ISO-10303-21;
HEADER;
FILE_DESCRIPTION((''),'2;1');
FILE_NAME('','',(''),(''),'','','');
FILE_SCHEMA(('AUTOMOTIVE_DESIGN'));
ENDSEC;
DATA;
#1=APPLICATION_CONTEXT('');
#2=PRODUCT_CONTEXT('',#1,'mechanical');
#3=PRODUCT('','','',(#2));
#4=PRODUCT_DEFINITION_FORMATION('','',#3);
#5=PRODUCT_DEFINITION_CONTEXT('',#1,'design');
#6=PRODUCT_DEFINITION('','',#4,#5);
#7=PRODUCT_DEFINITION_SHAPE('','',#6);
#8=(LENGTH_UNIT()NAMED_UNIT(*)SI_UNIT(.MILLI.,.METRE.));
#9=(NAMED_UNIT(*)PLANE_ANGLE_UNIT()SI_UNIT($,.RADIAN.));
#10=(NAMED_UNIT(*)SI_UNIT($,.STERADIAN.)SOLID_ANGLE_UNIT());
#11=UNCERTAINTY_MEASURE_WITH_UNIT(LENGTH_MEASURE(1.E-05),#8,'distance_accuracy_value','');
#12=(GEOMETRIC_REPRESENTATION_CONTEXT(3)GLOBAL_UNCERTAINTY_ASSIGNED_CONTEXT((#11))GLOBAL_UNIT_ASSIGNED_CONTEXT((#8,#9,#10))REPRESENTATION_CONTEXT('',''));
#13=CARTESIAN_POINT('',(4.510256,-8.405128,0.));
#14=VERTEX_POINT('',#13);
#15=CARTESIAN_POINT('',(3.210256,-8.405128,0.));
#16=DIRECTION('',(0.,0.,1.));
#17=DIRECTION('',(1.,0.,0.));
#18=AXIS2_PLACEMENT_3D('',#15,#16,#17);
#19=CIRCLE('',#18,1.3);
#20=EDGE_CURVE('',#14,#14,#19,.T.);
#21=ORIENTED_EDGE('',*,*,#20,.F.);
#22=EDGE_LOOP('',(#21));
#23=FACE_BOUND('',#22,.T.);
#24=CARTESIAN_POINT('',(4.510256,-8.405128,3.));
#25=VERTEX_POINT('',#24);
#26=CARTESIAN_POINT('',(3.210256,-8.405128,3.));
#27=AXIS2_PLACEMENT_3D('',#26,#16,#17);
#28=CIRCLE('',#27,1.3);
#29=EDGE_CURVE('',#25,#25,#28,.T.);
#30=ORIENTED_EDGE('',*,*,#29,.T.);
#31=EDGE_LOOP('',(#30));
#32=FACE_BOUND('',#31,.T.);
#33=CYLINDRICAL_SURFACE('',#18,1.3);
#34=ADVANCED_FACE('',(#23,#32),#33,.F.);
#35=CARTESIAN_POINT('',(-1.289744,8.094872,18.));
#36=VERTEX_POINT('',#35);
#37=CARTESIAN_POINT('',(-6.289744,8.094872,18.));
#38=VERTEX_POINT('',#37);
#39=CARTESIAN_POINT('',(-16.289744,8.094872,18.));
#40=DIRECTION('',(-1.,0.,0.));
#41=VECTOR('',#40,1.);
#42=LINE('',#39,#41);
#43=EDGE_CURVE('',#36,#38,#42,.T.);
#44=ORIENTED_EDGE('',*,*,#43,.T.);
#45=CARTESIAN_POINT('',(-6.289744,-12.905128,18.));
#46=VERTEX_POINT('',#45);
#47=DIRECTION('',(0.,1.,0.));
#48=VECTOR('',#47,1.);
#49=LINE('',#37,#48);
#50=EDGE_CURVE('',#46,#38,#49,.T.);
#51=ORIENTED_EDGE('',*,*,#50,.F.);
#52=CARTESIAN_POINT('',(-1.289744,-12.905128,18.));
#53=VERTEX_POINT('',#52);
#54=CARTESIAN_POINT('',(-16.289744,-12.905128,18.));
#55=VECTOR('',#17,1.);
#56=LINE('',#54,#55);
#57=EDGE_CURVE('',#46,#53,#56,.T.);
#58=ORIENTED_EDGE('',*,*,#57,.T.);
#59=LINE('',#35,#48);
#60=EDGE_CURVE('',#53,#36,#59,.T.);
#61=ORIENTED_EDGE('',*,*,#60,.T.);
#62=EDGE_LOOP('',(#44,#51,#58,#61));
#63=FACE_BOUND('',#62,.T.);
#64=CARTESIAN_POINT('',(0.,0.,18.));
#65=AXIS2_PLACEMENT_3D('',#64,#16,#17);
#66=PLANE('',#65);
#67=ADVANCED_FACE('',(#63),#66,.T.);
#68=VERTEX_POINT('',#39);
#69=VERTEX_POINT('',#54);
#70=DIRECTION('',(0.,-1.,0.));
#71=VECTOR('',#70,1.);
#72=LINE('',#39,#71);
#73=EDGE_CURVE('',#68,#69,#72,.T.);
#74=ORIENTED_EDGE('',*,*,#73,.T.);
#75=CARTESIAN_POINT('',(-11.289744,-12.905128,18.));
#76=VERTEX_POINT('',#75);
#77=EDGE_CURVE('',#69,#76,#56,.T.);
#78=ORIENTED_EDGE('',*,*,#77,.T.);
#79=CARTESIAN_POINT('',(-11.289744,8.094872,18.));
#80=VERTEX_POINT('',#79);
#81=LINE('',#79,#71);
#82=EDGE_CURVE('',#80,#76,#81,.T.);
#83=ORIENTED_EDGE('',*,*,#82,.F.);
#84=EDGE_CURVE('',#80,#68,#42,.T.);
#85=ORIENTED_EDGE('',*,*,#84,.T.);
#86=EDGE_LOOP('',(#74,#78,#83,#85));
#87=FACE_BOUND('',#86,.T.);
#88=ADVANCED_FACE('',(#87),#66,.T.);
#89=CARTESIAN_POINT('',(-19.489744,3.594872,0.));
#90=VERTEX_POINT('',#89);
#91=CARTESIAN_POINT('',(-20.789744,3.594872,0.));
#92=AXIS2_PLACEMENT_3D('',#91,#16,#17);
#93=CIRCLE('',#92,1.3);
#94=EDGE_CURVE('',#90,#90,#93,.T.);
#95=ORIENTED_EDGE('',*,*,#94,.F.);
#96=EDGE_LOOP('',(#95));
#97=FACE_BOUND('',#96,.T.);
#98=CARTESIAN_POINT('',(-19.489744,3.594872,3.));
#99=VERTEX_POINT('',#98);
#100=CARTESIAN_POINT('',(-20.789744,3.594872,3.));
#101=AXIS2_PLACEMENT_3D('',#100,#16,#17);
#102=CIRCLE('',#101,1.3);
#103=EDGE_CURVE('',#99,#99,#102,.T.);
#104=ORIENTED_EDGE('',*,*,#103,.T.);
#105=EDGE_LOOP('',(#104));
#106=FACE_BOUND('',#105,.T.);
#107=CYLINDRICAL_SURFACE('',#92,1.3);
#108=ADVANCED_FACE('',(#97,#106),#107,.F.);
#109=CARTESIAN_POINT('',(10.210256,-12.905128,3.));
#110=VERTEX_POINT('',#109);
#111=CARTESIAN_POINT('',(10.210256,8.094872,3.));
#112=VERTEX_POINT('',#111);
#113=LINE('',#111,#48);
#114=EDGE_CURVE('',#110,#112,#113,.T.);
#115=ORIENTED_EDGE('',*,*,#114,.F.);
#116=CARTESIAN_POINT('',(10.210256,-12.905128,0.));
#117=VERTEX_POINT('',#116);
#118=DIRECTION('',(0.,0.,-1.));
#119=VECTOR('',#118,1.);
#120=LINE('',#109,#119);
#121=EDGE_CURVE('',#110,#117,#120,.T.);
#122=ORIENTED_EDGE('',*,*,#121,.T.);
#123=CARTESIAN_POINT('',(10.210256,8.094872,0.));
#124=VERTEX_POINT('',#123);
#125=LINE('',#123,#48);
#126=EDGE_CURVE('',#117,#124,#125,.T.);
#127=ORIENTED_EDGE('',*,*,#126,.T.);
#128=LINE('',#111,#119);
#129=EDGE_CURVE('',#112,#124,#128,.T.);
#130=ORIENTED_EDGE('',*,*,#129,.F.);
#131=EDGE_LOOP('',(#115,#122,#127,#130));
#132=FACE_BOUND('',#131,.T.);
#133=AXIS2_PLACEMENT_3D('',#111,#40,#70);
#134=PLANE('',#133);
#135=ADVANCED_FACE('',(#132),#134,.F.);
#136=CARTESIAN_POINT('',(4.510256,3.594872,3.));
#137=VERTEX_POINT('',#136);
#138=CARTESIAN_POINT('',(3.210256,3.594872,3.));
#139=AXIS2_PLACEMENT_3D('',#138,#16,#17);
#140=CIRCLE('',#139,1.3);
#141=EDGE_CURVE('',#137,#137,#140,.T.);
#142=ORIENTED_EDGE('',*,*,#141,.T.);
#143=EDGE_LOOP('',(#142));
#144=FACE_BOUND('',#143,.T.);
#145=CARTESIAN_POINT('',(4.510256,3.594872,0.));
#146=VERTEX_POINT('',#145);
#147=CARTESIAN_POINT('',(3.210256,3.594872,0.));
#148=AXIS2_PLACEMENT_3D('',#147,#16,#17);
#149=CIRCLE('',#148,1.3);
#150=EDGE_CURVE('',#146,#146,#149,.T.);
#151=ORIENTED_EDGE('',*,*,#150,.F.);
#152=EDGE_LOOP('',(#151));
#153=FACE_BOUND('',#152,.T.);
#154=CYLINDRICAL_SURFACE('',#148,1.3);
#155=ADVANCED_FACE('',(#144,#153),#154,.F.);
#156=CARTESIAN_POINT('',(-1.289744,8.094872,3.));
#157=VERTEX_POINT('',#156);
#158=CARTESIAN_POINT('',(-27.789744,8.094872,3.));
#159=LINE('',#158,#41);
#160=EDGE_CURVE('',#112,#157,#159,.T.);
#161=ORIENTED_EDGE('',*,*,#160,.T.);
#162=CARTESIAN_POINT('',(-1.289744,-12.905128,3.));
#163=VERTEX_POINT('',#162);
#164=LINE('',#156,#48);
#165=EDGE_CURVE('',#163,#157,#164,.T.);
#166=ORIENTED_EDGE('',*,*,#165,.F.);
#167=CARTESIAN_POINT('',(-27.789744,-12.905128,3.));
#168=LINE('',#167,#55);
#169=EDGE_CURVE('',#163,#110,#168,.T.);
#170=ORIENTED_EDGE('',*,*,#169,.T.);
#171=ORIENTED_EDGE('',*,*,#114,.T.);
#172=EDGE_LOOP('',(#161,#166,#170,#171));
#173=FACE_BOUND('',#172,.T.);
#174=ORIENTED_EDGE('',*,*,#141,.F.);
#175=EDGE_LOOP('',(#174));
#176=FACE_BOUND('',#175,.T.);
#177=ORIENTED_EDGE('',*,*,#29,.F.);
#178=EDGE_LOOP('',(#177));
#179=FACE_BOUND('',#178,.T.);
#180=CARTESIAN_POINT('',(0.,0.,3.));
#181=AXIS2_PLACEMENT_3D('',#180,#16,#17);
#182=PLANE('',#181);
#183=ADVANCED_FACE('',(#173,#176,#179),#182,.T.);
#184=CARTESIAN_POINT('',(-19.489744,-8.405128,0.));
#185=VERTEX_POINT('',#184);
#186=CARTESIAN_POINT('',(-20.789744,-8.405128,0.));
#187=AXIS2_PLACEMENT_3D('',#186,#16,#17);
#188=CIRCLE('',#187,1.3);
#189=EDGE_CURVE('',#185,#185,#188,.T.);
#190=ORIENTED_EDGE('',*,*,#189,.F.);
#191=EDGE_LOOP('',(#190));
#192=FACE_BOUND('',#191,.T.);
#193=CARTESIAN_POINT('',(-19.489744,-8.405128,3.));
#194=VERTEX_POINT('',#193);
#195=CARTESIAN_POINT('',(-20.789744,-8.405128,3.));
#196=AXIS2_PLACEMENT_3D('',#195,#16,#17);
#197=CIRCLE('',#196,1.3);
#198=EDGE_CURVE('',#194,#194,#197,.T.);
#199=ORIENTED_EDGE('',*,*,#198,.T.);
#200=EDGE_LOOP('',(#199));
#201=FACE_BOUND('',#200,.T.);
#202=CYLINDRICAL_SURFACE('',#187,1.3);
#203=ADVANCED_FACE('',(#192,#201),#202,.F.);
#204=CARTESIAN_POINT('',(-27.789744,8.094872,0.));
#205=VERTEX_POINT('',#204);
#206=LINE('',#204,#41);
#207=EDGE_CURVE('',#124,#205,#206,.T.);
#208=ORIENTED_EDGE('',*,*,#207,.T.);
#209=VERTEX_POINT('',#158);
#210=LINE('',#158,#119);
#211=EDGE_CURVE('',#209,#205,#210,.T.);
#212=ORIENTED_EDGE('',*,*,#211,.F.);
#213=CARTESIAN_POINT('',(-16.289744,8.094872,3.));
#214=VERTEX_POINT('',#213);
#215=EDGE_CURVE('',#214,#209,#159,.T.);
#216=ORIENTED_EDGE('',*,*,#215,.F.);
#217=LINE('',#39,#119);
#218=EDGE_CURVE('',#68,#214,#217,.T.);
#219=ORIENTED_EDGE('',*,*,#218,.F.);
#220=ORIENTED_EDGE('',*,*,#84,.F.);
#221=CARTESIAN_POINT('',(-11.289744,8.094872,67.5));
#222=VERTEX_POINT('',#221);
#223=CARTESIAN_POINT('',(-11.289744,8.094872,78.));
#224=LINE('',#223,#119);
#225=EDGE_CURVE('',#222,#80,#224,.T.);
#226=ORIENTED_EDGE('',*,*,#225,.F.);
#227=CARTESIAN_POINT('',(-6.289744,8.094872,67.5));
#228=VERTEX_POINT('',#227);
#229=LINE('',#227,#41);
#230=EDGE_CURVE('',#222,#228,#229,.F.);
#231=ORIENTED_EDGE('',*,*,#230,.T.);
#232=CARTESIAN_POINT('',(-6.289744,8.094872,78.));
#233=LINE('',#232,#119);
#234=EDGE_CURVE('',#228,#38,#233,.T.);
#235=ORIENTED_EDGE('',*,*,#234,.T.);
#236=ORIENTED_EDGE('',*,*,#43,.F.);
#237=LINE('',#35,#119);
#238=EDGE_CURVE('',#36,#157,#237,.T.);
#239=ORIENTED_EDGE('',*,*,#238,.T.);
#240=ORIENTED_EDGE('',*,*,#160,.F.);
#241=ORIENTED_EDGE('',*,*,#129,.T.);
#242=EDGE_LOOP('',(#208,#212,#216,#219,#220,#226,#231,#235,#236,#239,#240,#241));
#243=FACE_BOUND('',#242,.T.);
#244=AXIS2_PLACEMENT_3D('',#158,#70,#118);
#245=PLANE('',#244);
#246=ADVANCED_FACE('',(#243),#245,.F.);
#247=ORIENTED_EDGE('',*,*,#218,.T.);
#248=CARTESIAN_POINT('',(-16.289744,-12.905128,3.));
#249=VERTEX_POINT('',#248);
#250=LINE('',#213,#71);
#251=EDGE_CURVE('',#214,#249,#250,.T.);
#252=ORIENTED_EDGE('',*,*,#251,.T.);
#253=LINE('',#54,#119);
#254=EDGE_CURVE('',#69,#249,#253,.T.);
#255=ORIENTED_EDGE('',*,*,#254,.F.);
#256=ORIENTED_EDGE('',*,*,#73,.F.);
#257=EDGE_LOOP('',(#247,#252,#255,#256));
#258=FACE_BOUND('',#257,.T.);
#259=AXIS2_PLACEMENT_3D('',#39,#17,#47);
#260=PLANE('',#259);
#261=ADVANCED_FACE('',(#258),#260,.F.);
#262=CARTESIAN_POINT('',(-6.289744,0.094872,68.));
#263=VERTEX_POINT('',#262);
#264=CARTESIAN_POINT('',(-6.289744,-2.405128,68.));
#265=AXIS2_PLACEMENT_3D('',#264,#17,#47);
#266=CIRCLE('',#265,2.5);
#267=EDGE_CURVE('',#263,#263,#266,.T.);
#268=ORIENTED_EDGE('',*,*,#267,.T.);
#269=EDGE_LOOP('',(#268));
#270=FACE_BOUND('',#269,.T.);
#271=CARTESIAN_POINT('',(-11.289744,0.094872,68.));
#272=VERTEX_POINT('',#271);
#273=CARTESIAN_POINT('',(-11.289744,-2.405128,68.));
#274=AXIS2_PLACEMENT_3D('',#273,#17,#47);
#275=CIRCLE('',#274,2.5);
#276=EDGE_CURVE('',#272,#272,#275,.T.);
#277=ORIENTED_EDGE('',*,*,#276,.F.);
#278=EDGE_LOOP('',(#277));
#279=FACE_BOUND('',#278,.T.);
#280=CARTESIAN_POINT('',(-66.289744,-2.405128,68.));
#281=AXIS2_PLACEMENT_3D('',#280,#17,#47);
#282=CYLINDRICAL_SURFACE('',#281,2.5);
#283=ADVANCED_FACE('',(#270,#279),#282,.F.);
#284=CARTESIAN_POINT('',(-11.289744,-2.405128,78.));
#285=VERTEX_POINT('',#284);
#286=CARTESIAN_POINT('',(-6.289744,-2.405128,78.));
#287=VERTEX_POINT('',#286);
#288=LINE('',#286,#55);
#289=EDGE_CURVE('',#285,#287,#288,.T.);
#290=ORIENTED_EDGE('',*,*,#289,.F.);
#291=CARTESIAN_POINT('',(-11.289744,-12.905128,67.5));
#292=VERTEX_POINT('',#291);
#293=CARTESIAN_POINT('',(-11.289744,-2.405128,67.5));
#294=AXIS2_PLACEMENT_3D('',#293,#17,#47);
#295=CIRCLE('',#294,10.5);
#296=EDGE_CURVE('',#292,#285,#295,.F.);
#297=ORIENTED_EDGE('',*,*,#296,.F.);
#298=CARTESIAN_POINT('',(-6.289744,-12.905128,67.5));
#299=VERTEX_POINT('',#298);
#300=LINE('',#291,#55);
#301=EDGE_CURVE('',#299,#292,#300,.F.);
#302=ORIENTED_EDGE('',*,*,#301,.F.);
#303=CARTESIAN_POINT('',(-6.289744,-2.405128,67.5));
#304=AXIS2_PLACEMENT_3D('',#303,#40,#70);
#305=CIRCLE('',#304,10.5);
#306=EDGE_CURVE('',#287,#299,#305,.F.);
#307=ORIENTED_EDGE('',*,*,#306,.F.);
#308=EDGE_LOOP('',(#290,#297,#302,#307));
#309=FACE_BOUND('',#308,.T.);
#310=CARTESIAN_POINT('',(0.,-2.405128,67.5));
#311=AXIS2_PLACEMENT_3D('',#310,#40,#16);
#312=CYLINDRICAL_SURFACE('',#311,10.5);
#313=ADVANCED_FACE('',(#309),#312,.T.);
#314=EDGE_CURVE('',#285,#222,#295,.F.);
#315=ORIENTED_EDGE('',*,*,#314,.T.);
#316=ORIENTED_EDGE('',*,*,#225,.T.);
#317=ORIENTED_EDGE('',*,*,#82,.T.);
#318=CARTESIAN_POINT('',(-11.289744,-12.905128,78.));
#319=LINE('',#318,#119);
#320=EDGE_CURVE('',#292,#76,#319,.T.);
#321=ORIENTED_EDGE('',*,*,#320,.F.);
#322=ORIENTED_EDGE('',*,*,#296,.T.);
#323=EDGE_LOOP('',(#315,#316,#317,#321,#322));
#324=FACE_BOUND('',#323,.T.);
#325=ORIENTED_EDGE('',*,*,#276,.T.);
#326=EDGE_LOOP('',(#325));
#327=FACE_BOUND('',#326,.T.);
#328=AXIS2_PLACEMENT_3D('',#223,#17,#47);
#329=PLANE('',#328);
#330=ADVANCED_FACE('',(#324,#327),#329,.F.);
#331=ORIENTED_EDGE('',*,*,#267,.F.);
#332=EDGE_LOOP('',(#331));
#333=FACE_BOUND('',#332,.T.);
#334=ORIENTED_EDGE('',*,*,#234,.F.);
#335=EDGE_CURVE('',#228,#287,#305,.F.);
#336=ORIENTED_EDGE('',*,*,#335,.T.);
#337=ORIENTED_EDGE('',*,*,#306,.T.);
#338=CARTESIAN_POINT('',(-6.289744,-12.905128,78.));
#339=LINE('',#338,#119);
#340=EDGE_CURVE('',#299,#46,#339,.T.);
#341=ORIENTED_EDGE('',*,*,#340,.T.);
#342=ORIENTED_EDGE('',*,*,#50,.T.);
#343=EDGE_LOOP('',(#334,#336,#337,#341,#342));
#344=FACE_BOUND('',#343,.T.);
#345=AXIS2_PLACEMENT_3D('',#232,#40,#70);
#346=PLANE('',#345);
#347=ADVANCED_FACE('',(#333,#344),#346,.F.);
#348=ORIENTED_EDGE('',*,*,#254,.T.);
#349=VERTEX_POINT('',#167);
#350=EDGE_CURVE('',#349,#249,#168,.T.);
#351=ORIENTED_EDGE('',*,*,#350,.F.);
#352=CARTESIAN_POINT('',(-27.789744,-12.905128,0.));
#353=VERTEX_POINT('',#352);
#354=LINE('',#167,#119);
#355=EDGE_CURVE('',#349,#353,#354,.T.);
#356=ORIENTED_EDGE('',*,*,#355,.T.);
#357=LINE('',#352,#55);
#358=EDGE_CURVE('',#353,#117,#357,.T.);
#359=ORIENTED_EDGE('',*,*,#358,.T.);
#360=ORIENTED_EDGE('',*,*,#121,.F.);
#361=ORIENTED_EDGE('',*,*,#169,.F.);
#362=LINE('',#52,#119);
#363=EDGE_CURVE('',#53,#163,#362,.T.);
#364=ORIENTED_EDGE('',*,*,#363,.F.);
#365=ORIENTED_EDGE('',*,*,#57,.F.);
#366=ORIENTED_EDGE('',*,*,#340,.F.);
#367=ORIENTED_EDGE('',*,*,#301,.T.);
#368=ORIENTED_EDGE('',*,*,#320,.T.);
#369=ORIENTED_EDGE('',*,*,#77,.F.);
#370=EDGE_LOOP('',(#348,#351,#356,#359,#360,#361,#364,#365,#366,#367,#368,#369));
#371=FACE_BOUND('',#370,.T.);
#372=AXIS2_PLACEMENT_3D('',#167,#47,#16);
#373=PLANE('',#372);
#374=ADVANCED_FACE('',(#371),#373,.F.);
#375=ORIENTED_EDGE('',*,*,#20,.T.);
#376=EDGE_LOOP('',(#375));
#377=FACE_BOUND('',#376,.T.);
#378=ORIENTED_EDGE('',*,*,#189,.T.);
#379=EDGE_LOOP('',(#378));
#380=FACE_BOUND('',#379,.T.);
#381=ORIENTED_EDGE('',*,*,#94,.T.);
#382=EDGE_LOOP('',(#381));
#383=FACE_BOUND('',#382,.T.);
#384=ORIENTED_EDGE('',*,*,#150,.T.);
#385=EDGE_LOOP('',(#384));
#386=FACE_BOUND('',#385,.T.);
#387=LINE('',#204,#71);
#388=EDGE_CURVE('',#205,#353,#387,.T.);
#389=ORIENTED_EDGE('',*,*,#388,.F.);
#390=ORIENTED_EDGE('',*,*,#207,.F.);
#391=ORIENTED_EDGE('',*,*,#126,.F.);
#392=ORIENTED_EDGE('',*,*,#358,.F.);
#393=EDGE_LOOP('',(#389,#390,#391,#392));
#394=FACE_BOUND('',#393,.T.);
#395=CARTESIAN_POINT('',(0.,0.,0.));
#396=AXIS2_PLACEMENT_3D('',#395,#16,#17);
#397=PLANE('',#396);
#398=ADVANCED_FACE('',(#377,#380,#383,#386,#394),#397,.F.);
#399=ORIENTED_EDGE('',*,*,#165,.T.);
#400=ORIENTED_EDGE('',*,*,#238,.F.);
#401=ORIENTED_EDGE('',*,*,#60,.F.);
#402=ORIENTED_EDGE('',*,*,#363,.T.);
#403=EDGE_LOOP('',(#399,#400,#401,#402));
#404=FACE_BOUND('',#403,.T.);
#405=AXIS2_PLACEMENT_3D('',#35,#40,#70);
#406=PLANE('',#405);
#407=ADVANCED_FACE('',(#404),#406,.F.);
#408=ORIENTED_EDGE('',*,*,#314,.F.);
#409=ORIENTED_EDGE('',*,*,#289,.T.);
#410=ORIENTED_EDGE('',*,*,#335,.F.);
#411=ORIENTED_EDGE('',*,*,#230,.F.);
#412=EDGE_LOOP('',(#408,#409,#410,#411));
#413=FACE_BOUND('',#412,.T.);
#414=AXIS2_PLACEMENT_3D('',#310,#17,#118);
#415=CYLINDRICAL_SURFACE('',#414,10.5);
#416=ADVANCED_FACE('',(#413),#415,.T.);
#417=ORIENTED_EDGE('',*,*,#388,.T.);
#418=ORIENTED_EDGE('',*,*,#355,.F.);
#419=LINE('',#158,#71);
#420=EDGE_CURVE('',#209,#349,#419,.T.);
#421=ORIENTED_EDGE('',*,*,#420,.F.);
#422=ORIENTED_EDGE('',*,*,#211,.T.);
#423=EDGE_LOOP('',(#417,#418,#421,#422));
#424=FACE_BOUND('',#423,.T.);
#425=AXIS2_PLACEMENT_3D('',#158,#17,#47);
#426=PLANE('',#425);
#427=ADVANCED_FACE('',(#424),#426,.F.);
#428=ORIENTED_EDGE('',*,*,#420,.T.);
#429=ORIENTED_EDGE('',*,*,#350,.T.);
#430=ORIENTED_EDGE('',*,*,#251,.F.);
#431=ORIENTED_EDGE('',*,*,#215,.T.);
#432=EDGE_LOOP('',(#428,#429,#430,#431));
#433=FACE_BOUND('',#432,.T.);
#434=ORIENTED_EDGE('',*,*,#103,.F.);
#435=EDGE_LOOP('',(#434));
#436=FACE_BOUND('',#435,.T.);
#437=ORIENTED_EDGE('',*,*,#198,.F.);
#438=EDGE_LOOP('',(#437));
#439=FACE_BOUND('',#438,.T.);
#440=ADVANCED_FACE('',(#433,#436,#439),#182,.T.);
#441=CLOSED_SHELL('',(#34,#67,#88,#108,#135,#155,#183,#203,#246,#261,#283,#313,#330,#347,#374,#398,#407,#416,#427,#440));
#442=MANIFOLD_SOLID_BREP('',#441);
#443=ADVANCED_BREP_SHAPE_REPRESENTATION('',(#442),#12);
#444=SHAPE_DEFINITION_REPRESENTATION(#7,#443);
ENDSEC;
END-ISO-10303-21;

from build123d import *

# Parameters (mm, degrees)
SKETCH_1_W             = 38
SKETCH_1_H             = 21
EXTRUDE_1_DEPTH        = 3
SKETCH_2_R             = 1.3
CUT_EXTRUDE_1_DEPTH    = 3
PATTERN_LINEAR_1_COUNT = 2
PATTERN_LINEAR_1_PITCH = 24
SKETCH_3_W             = 15
SKETCH_3_H             = 21
EXTRUDE_2_DEPTH        = 15
SKETCH_4_W             = 5
SKETCH_4_H             = 21
EXTRUDE_3_DEPTH        = 60
SKETCH_5_R             = 2.5
CUT_EXTRUDE_2_DEPTH    = 60
FILLET_1_R             = 10.5


with BuildPart() as part:
    # 草图1 → 凸台-拉伸1 (new body)
    with BuildSketch(Plane.XY):
        with Locations((-8.78974359, -2.405128205)):
            Rectangle(SKETCH_1_W, SKETCH_1_H)
    extrude(amount=EXTRUDE_1_DEPTH)

    # 草图2 → 切除-拉伸1 (cut)
    with BuildSketch(Plane.XY.offset(3)):
        with Locations((-20.78974359, 3.594871795)):
            Circle(SKETCH_2_R)
        with Locations((-20.78974359, -8.405128205)):
            Circle(SKETCH_2_R)
    cut_extrude_1 = extrude(amount=-CUT_EXTRUDE_1_DEPTH, mode=Mode.SUBTRACT)

    # 阵列(线性)1: 切除-拉伸1 ×2
    with Locations(*[(i * PATTERN_LINEAR_1_PITCH, 0, 0) for i in range(1, PATTERN_LINEAR_1_COUNT)]):
        add(cut_extrude_1, mode=Mode.SUBTRACT)

    # 草图3 → 凸台-拉伸2 (add)
    with BuildSketch(Plane.XY.offset(3)):
        with Locations((-8.78974359, -2.405128205)):
            Rectangle(SKETCH_3_W, SKETCH_3_H)
    extrude(amount=EXTRUDE_2_DEPTH)

    # 草图4 → 凸台-拉伸3 (add)
    with BuildSketch(Plane.XY.offset(18)):
        with Locations((-8.78974359, -2.405128205)):
            Rectangle(SKETCH_4_W, SKETCH_4_H)
    extrude(amount=EXTRUDE_3_DEPTH)

    # 草图5 → 切除-拉伸2 (cut)
    with BuildSketch(Plane(origin=(-6.28974359, 0, 0), x_dir=(0, 0, -1), z_dir=(1, 0, 0))):
        with Locations(Location((-68, -2.405128205, 0), (0, 0, 90))):
            Circle(SKETCH_5_R)
    extrude(amount=-CUT_EXTRUDE_2_DEPTH, mode=Mode.SUBTRACT)

    # 圆角1
    fillet_1_edges = [part.edges().sort_by_distance(p)[0] for p in [
        (-8.78974359, 8.094871795, 78),
        (-8.78974359, -12.905128205, 78),
    ]]
    fillet(fillet_1_edges, radius=FILLET_1_R - 0.0001)  # a hair under: the kernel refuses the full size


solid = part.part
